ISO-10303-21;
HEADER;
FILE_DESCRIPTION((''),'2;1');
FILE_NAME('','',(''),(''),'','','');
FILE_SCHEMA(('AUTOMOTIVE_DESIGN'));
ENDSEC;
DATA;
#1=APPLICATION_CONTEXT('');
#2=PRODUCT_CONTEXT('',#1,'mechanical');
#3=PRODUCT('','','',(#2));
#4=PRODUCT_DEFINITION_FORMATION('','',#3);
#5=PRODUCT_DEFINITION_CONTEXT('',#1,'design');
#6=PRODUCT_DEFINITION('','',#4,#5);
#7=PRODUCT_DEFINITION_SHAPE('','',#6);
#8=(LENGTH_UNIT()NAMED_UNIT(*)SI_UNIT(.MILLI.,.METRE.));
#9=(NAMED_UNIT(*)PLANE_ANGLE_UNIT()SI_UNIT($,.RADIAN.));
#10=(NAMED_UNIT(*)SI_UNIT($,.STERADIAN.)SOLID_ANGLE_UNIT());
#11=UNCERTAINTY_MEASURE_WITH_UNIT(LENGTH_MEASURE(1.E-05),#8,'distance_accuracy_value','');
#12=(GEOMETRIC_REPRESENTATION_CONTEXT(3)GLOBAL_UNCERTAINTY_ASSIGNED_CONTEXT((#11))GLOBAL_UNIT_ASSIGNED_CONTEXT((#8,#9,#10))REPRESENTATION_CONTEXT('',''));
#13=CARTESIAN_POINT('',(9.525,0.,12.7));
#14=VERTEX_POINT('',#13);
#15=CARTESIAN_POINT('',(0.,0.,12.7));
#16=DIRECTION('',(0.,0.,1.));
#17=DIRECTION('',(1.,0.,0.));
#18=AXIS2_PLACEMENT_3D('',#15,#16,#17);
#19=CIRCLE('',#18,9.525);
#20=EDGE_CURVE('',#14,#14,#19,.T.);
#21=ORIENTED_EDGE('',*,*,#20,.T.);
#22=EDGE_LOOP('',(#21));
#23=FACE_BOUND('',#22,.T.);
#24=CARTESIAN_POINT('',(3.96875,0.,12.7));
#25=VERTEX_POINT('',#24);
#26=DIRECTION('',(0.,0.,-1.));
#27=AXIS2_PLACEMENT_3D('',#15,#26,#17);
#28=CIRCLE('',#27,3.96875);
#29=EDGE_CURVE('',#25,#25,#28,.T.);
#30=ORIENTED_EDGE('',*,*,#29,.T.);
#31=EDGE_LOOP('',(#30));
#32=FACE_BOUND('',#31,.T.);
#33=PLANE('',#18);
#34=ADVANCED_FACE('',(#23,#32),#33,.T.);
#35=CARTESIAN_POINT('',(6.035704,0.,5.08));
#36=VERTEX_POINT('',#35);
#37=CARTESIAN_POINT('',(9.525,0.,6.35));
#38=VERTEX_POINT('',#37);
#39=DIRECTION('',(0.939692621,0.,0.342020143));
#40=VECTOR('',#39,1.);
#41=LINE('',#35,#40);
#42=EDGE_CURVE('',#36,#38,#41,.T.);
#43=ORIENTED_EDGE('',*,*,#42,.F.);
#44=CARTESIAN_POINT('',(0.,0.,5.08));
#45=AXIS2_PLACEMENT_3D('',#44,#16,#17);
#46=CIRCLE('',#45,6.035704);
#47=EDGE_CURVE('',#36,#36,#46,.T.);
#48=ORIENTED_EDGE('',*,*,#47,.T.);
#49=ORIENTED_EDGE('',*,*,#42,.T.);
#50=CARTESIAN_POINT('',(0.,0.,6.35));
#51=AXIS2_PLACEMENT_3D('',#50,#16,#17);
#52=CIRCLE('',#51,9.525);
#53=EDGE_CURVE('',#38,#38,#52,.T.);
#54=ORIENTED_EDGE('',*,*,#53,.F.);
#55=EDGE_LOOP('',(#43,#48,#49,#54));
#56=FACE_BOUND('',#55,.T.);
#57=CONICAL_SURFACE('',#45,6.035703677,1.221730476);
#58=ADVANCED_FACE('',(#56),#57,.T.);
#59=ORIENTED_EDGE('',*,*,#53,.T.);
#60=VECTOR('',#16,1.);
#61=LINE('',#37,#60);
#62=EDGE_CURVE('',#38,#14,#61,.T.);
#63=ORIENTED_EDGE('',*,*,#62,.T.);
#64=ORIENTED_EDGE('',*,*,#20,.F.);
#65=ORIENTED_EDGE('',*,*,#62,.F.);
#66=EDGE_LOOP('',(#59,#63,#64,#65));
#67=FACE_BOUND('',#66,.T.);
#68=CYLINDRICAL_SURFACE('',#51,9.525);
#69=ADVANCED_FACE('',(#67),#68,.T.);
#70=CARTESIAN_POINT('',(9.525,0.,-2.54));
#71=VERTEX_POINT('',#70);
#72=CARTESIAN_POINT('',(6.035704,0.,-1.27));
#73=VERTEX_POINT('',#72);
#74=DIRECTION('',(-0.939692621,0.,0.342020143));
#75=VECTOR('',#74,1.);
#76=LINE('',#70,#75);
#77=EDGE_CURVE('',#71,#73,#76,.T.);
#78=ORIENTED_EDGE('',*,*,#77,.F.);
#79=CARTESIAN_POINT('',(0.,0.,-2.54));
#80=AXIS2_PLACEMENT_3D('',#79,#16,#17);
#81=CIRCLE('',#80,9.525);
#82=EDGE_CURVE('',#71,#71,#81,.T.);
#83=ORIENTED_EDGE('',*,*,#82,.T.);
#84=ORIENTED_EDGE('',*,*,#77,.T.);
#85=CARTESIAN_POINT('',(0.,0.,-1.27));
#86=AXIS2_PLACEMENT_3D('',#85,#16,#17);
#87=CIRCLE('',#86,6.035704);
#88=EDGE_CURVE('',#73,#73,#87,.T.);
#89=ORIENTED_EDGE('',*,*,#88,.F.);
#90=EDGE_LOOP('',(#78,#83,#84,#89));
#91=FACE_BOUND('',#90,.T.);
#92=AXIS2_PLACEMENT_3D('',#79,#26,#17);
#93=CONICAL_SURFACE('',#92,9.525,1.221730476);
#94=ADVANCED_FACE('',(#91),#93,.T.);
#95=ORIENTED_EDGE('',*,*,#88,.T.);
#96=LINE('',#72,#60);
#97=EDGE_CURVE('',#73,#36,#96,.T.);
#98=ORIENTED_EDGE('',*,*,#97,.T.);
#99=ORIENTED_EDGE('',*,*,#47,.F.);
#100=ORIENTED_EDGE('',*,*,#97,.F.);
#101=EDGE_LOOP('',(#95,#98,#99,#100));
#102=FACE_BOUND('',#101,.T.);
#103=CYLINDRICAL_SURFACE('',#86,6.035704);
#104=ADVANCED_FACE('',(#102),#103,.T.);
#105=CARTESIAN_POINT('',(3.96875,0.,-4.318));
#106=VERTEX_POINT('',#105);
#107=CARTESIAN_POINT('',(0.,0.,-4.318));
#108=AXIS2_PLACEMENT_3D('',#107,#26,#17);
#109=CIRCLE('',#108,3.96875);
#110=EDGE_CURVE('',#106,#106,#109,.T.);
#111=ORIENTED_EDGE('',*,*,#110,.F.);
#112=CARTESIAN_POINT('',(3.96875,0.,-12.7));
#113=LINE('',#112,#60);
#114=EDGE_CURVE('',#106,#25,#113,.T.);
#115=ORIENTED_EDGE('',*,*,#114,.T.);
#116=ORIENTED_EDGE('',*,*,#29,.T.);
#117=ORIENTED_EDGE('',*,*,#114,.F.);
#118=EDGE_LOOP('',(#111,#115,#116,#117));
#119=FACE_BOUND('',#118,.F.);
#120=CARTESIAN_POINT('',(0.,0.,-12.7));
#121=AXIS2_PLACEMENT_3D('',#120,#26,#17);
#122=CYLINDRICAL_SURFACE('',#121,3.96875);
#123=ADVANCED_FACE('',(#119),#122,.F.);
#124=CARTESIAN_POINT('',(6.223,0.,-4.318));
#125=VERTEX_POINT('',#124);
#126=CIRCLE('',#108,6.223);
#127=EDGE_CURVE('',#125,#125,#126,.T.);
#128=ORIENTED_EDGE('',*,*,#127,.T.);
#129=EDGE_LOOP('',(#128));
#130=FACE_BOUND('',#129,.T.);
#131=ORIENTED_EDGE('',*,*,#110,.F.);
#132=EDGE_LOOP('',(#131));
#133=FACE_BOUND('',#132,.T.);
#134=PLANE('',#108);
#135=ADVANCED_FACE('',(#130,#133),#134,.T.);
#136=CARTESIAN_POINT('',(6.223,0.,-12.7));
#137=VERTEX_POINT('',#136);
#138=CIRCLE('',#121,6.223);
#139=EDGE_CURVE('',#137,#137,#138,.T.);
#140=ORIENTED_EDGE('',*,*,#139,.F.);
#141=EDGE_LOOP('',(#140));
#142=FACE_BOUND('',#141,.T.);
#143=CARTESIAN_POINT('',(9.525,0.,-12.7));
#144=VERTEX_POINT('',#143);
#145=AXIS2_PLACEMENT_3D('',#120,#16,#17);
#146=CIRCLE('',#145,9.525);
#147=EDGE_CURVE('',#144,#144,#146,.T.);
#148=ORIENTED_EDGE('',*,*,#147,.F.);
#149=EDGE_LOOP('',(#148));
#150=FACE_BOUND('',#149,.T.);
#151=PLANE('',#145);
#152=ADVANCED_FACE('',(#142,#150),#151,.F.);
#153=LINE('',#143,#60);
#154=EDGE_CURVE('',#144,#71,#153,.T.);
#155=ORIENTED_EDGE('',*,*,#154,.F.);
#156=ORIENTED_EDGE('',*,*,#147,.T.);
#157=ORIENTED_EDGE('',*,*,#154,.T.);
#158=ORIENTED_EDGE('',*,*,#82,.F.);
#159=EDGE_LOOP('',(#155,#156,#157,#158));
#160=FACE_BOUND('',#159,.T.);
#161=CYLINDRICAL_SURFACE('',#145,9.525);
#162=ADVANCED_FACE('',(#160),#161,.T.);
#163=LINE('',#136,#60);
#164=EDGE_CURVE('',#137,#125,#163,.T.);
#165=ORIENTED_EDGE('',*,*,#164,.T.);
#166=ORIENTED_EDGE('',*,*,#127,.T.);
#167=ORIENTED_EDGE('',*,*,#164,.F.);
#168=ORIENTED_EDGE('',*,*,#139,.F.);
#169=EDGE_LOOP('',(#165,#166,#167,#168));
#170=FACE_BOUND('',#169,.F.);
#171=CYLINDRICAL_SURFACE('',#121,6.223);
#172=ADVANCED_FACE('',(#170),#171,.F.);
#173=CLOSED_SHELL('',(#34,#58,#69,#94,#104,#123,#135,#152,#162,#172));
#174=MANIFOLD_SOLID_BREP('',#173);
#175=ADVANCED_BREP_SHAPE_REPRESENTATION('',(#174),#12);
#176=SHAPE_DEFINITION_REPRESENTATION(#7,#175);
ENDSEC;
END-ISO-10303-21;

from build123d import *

# Parameters (mm, degrees)
F2_R     = 3.96875
F3_DEPTH = 25.401
F4_R     = 6.223
F4_R_2   = 3.96875
F5_DEPTH = 8.382


# Not quite as in the source:
# - a feature names something its author has since deleted; it is built from what else it names


with BuildPart() as f1:
    # F0 (on Front) → F1 (revolve)
    with BuildSketch(Plane.XZ):
        Polygon((0, 12.7), (0, 0), (0, -12.7), (9.525, -12.7), (9.525, -2.54), (6.0357036773, -1.27), (6.0357036773, 5.08), (9.525, 6.35), (9.525, 12.7), align=None)
    revolve(axis=Axis((0, 0, 2.3044683039), (0, 0, 1)))

    # F2 (on face) → F3 (cut, through all)
    with BuildSketch(Plane(origin=(0, 0, -12.7), x_dir=(1, 0, 0), z_dir=(0, 0, -1))):
        Circle(F2_R)
    extrude(amount=-F3_DEPTH, mode=Mode.SUBTRACT)

    # F4 (on face) → F5 (cut)
    with BuildSketch(Plane(origin=(0, 0, -12.7), x_dir=(1, 0, 0), z_dir=(0, 0, -1))):
        Circle(F4_R)
        Circle(F4_R_2, mode=Mode.SUBTRACT)
    extrude(amount=-F5_DEPTH, mode=Mode.SUBTRACT)


solid = f1.part
